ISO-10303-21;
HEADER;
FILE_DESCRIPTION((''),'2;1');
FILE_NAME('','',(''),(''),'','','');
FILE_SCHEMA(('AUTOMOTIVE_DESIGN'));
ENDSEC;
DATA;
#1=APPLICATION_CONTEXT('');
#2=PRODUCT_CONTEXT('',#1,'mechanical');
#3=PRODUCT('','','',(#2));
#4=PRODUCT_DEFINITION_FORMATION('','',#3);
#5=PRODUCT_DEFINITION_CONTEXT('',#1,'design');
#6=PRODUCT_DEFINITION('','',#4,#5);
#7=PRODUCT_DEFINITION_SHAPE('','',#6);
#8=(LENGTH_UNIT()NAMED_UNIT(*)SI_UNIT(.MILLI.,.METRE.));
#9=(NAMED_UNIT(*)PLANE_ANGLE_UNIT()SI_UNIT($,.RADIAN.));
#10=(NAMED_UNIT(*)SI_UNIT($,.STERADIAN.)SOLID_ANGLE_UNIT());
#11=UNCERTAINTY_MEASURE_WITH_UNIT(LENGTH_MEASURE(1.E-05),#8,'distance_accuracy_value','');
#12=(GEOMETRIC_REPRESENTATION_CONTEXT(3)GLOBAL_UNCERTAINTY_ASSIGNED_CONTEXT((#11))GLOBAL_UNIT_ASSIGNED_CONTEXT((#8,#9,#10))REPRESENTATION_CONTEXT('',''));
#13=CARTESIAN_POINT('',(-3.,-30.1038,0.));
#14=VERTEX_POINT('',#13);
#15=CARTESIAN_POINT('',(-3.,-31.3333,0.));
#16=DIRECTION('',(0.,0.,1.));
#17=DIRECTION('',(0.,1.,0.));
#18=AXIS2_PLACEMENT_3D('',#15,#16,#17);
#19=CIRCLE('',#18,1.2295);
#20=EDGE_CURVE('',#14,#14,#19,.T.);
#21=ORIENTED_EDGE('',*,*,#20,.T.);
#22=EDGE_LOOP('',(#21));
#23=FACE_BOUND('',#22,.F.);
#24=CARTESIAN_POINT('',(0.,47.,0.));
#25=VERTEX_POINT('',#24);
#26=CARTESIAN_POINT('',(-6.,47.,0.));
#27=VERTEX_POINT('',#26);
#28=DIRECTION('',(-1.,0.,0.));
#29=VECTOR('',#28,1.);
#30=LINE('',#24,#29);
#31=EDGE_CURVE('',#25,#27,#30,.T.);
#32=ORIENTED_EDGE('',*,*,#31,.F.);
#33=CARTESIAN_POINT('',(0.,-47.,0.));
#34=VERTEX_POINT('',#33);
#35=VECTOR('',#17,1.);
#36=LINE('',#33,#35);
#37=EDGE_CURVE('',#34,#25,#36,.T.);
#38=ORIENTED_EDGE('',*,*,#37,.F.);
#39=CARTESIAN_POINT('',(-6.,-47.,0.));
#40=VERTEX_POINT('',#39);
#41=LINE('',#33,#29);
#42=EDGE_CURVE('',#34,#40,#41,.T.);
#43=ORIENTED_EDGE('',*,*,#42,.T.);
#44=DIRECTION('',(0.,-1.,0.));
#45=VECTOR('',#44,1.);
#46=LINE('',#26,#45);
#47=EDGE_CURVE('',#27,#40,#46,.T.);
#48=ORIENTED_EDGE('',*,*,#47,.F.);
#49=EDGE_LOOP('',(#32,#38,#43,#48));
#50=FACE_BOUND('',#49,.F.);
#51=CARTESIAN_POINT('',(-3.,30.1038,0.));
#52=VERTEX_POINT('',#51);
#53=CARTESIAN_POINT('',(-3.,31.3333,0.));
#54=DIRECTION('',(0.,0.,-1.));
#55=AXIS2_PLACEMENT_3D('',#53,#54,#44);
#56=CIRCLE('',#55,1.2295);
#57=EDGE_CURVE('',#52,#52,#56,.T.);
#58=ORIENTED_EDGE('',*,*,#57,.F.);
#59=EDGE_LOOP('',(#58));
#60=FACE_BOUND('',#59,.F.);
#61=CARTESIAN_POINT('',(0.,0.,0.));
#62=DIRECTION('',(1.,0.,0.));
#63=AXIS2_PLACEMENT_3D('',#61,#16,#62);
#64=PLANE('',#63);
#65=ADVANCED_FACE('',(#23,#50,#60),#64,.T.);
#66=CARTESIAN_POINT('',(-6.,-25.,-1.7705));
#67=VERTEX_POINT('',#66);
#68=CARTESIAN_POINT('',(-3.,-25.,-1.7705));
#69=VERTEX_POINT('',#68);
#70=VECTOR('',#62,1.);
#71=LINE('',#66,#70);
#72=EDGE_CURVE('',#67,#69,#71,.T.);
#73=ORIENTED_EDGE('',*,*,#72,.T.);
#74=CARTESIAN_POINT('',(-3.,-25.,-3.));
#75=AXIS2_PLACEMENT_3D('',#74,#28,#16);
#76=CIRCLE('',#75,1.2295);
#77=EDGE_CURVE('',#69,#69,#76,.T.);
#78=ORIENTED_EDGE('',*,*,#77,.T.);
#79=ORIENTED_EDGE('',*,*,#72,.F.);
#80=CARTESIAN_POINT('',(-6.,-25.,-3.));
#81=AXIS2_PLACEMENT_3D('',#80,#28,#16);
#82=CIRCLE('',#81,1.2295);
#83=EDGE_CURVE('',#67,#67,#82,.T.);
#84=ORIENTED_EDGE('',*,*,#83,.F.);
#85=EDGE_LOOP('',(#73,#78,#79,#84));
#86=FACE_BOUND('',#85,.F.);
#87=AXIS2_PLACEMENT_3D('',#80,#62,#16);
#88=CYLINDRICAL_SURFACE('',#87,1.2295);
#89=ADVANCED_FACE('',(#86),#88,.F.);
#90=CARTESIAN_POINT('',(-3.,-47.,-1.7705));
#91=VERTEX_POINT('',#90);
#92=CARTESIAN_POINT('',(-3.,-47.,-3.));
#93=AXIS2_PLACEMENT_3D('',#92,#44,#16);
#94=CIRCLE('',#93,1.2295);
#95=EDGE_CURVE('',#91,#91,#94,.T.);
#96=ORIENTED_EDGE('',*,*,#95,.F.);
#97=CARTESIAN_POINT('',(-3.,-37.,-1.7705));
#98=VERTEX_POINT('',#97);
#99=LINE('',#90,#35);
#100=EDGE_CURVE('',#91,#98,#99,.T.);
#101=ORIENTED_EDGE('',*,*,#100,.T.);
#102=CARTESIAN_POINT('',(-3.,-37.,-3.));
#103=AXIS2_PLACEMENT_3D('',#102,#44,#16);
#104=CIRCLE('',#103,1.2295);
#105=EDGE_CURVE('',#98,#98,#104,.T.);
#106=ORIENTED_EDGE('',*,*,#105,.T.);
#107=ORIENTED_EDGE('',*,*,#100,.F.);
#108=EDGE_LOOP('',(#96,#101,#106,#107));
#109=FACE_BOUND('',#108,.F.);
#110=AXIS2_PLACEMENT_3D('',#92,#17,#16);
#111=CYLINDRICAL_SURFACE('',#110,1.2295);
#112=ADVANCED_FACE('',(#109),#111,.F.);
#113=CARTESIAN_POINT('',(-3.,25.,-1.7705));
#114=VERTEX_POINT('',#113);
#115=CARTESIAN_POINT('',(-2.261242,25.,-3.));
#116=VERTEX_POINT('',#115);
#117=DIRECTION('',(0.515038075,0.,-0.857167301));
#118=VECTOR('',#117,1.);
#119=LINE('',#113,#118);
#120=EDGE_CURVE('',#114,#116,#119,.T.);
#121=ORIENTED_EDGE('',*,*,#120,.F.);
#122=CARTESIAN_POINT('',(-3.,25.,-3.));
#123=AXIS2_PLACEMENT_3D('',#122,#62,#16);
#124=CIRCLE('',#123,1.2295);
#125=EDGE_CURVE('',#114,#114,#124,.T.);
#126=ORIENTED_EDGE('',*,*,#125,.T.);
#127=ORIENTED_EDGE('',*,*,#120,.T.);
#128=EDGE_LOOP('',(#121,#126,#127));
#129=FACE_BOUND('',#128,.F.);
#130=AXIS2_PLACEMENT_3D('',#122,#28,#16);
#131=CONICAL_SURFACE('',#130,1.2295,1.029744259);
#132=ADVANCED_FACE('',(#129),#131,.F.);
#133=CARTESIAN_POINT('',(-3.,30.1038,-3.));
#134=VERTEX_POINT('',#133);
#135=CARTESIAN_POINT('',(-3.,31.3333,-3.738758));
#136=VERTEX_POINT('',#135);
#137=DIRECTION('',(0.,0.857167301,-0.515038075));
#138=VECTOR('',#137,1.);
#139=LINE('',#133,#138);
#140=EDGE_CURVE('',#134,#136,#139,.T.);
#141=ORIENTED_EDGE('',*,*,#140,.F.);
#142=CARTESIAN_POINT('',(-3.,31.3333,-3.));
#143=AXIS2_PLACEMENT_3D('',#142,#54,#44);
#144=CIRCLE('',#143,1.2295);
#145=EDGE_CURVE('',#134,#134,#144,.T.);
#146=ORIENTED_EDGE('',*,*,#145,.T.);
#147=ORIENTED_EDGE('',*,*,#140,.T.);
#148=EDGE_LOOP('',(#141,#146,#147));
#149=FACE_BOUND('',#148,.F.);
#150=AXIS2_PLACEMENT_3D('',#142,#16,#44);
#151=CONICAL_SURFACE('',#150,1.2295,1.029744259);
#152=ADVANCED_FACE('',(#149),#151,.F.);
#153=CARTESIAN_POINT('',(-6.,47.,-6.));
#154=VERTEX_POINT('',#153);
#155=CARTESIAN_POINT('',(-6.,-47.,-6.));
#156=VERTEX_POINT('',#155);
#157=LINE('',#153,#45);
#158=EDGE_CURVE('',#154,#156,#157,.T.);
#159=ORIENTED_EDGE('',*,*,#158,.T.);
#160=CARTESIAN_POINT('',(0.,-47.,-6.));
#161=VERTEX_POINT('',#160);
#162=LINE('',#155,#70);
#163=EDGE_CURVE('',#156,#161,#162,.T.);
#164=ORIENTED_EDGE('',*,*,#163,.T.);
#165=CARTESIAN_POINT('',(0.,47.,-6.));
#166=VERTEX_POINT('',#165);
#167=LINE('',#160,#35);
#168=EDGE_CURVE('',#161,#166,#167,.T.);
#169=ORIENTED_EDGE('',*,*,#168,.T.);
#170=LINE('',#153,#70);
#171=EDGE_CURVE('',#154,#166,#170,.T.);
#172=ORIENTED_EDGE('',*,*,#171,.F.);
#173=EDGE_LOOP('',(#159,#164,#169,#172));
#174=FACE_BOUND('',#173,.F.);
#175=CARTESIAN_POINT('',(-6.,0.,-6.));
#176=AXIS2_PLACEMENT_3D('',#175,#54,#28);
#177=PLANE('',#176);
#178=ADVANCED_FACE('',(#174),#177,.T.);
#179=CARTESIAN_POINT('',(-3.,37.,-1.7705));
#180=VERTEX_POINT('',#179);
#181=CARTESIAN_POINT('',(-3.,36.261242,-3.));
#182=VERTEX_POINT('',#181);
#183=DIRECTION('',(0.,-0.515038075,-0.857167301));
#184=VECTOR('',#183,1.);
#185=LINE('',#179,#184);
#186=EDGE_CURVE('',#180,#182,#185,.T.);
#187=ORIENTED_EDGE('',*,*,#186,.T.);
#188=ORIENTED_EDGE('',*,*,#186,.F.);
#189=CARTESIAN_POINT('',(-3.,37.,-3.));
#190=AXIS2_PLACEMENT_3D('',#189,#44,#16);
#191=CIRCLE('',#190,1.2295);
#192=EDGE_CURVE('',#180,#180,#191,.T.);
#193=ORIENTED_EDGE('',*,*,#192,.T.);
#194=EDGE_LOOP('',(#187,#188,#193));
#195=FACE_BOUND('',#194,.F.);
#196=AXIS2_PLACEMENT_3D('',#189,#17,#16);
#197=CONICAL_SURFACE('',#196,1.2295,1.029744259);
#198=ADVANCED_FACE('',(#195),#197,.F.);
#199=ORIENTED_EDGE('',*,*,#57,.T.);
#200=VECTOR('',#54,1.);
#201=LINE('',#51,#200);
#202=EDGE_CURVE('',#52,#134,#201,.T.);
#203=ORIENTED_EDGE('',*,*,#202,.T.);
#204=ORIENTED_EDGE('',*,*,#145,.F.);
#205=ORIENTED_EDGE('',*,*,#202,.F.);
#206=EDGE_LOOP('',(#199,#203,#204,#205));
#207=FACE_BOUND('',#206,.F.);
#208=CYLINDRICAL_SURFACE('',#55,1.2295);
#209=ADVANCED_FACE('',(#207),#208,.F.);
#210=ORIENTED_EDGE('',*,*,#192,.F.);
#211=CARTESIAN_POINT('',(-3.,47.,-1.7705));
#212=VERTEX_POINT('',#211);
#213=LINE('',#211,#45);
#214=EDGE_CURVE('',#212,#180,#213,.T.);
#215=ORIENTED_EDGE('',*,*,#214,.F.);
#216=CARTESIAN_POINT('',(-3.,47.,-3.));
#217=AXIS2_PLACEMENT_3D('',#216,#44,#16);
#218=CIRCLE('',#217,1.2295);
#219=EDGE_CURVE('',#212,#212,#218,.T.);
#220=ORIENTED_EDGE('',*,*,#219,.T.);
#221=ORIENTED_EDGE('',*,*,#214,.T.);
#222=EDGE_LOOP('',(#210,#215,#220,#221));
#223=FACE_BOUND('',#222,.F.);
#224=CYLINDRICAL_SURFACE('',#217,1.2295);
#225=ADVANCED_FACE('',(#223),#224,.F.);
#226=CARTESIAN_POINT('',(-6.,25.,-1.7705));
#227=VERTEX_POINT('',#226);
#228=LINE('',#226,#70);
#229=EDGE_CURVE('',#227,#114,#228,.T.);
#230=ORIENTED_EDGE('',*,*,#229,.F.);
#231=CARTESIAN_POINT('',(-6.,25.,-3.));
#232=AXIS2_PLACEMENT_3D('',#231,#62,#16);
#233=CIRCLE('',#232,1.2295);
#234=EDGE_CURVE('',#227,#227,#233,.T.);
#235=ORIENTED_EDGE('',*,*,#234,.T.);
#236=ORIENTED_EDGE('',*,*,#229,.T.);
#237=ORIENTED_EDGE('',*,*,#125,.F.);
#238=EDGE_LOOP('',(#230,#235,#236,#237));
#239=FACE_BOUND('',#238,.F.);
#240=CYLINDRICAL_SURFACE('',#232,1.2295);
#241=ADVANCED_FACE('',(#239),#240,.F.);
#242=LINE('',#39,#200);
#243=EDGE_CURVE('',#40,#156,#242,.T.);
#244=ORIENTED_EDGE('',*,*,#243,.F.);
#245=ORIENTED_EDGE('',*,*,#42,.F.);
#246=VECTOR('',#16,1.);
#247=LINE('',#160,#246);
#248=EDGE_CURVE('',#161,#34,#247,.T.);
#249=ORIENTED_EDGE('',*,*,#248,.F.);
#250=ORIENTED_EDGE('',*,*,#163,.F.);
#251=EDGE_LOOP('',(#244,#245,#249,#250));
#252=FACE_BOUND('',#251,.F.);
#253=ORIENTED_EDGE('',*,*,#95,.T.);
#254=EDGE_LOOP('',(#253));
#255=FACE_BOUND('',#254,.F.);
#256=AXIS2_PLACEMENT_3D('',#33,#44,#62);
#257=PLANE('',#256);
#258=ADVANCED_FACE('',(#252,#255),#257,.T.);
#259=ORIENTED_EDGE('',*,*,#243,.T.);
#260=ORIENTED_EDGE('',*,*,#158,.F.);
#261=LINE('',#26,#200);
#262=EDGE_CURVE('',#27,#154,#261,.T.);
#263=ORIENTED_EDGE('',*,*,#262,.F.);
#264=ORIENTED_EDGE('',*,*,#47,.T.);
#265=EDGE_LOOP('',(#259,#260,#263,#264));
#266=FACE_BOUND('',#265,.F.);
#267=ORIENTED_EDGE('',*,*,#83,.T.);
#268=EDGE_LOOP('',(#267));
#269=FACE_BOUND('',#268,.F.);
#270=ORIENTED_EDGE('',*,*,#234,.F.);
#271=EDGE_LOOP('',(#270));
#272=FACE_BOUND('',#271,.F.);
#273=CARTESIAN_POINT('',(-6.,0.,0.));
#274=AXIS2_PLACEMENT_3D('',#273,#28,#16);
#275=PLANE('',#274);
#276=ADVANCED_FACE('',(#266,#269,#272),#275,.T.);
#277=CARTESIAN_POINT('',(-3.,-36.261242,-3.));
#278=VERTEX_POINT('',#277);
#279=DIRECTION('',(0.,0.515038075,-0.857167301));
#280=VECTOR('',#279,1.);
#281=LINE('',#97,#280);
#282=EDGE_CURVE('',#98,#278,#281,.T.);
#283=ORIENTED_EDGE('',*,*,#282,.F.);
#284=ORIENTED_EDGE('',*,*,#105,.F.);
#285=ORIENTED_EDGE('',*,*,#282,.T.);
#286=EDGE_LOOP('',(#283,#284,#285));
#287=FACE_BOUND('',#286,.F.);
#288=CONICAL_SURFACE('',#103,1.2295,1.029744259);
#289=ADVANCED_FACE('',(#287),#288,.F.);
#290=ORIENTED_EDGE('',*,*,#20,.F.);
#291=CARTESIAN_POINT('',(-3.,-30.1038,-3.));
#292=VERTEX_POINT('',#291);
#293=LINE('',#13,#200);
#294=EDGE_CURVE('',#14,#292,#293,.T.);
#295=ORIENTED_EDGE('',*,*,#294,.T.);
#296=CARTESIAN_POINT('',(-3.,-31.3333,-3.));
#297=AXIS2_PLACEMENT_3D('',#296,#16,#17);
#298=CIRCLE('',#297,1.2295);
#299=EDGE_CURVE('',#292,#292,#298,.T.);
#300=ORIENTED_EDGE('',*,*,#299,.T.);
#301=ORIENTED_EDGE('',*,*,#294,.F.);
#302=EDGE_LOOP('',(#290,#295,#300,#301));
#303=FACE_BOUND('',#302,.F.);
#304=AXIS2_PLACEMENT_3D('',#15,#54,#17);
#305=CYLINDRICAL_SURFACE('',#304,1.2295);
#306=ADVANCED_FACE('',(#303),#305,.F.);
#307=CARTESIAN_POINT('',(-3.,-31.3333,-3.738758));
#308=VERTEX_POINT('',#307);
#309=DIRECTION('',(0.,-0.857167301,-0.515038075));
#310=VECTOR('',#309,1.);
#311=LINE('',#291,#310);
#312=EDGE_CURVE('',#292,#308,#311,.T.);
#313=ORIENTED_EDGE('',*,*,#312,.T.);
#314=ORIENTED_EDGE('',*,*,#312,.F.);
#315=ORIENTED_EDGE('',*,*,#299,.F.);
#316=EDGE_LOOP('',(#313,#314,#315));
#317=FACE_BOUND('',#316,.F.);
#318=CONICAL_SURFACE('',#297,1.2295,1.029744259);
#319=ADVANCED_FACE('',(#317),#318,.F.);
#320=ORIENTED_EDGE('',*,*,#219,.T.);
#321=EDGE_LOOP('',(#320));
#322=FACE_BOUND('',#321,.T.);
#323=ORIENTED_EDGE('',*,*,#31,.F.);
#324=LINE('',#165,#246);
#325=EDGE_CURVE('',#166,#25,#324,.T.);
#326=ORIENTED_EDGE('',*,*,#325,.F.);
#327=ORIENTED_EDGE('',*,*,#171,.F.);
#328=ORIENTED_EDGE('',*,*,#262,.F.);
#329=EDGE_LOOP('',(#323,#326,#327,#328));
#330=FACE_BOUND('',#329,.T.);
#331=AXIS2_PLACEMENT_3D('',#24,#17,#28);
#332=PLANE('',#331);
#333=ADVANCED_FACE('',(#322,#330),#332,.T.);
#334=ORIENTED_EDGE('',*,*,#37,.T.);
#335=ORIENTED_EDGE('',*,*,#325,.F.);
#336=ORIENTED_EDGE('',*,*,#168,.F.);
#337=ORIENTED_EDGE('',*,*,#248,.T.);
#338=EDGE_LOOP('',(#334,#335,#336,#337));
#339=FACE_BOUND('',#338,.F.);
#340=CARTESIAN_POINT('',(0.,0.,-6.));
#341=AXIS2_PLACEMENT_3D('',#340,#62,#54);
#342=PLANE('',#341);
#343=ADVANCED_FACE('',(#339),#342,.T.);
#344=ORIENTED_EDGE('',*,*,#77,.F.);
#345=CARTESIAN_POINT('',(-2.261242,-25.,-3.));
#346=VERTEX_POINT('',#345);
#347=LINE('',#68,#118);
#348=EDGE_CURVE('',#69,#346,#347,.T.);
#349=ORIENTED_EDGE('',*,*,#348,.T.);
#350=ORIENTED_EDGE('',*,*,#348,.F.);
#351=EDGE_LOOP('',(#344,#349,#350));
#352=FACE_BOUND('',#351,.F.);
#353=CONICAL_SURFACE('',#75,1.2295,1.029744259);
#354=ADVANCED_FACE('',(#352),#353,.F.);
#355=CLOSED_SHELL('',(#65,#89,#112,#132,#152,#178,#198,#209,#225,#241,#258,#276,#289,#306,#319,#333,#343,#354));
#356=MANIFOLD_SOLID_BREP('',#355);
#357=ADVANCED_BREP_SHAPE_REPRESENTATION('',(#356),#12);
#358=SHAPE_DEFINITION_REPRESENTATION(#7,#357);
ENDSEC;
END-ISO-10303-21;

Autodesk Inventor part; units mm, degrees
ref_plane "YZ Plane" through (0, 0, 0) normal (1, 0, 0) x (0, 1, 0)
ref_plane "XZ Plane" through (0, 0, 0) normal (0, 1, 0) x (-1, 0, 0)
ref_plane "XY Plane" through (0, 0, 0) normal (0, 0, 1) x (1, 0, 0)
sketch "Sketch1" plane through (0, 0, 0) normal (0, 1, 0) x (-1, 0, 0)
  line L0 (0, 0) -> (6, 0)
  line L1 (6, 0) -> (6, -6)
  line L2 (6, -6) -> (0, -6)
  line L3 (0, -6) -> (0, 0)
  dimension "d0" = 6
extrude "Extrusion1" add sketch "Sketch1" along normal blind 47
sketch "Sketch2" plane through (0, 47, 0) normal (0, 1, 0) x (1, 0, 0)
  line L0 (0, 6) -> (-6, 6) projected
  line L1 (0, 0) -> (0, 6) projected
  point P0 (-3, 3)
  point P1 (-3, 6)
  point P2 (0, 3)
  point P3 (-3, 6)
hole "Hole1" at (-3, 47, -3) direction (0, -1, 0) diameter 2.459 depth 10 tip angle 118 thread size "M3x0.5" class "6H" standard "ANSI Metric M Profile"
sketch "Sketch3" plane through (-6, 47, 0) normal (0, 0, 1) x (1, 0, 0)
  line L0 (0, -47) -> (0, 0) projected
  line L1 (6, -47) -> (6, 0) projected
  line L2 (0, 0) -> (6, 0) projected
  point P0 (3, -47)
  point P1 (3, -15.6667)
  point P2 (0, -94)
  point P3 (6, -94)
  dimension "d17" = 6
  dimension "d18" = 3
  dimension "d19" = 15.6667
  dimension "d20" = 31.3333
  dimension "d21" = 47
hole "Hole2" at (-3, 31.3333, 0) direction (0, 0, -1) diameter 2.459 depth 3 tip angle 118 thread size "M3x0.5" class "6H" standard "ANSI Metric M Profile"
sketch "Sketch5" plane through (-6, 0, -6) normal (-1, 0, 0) x (0, 0, 1)
  line L0 (0, 0) -> (6, 0) projected
  point P0 (3, 25)
  point P1 (3, 0)
  dimension "d29" = 25
hole "Hole3" at (-6, 25, -3) direction (1, 0, 0) diameter 2.459 depth 3 tip angle 118 thread size "M3x0.5" class "6H" standard "ANSI Metric M Profile"
mirror "Mirror2" about plane through (-3, 0, -3) normal (0, -1, 0) of "Extrusion1", "Hole1", "Hole2", "Hole3"
equation "\"d18\" = 0.5 * d17"
equation "\"d19\" = 0.333333 * d21"
equation "\"d20\" = 2 * d19"
properties part number "VerticalStrut"
